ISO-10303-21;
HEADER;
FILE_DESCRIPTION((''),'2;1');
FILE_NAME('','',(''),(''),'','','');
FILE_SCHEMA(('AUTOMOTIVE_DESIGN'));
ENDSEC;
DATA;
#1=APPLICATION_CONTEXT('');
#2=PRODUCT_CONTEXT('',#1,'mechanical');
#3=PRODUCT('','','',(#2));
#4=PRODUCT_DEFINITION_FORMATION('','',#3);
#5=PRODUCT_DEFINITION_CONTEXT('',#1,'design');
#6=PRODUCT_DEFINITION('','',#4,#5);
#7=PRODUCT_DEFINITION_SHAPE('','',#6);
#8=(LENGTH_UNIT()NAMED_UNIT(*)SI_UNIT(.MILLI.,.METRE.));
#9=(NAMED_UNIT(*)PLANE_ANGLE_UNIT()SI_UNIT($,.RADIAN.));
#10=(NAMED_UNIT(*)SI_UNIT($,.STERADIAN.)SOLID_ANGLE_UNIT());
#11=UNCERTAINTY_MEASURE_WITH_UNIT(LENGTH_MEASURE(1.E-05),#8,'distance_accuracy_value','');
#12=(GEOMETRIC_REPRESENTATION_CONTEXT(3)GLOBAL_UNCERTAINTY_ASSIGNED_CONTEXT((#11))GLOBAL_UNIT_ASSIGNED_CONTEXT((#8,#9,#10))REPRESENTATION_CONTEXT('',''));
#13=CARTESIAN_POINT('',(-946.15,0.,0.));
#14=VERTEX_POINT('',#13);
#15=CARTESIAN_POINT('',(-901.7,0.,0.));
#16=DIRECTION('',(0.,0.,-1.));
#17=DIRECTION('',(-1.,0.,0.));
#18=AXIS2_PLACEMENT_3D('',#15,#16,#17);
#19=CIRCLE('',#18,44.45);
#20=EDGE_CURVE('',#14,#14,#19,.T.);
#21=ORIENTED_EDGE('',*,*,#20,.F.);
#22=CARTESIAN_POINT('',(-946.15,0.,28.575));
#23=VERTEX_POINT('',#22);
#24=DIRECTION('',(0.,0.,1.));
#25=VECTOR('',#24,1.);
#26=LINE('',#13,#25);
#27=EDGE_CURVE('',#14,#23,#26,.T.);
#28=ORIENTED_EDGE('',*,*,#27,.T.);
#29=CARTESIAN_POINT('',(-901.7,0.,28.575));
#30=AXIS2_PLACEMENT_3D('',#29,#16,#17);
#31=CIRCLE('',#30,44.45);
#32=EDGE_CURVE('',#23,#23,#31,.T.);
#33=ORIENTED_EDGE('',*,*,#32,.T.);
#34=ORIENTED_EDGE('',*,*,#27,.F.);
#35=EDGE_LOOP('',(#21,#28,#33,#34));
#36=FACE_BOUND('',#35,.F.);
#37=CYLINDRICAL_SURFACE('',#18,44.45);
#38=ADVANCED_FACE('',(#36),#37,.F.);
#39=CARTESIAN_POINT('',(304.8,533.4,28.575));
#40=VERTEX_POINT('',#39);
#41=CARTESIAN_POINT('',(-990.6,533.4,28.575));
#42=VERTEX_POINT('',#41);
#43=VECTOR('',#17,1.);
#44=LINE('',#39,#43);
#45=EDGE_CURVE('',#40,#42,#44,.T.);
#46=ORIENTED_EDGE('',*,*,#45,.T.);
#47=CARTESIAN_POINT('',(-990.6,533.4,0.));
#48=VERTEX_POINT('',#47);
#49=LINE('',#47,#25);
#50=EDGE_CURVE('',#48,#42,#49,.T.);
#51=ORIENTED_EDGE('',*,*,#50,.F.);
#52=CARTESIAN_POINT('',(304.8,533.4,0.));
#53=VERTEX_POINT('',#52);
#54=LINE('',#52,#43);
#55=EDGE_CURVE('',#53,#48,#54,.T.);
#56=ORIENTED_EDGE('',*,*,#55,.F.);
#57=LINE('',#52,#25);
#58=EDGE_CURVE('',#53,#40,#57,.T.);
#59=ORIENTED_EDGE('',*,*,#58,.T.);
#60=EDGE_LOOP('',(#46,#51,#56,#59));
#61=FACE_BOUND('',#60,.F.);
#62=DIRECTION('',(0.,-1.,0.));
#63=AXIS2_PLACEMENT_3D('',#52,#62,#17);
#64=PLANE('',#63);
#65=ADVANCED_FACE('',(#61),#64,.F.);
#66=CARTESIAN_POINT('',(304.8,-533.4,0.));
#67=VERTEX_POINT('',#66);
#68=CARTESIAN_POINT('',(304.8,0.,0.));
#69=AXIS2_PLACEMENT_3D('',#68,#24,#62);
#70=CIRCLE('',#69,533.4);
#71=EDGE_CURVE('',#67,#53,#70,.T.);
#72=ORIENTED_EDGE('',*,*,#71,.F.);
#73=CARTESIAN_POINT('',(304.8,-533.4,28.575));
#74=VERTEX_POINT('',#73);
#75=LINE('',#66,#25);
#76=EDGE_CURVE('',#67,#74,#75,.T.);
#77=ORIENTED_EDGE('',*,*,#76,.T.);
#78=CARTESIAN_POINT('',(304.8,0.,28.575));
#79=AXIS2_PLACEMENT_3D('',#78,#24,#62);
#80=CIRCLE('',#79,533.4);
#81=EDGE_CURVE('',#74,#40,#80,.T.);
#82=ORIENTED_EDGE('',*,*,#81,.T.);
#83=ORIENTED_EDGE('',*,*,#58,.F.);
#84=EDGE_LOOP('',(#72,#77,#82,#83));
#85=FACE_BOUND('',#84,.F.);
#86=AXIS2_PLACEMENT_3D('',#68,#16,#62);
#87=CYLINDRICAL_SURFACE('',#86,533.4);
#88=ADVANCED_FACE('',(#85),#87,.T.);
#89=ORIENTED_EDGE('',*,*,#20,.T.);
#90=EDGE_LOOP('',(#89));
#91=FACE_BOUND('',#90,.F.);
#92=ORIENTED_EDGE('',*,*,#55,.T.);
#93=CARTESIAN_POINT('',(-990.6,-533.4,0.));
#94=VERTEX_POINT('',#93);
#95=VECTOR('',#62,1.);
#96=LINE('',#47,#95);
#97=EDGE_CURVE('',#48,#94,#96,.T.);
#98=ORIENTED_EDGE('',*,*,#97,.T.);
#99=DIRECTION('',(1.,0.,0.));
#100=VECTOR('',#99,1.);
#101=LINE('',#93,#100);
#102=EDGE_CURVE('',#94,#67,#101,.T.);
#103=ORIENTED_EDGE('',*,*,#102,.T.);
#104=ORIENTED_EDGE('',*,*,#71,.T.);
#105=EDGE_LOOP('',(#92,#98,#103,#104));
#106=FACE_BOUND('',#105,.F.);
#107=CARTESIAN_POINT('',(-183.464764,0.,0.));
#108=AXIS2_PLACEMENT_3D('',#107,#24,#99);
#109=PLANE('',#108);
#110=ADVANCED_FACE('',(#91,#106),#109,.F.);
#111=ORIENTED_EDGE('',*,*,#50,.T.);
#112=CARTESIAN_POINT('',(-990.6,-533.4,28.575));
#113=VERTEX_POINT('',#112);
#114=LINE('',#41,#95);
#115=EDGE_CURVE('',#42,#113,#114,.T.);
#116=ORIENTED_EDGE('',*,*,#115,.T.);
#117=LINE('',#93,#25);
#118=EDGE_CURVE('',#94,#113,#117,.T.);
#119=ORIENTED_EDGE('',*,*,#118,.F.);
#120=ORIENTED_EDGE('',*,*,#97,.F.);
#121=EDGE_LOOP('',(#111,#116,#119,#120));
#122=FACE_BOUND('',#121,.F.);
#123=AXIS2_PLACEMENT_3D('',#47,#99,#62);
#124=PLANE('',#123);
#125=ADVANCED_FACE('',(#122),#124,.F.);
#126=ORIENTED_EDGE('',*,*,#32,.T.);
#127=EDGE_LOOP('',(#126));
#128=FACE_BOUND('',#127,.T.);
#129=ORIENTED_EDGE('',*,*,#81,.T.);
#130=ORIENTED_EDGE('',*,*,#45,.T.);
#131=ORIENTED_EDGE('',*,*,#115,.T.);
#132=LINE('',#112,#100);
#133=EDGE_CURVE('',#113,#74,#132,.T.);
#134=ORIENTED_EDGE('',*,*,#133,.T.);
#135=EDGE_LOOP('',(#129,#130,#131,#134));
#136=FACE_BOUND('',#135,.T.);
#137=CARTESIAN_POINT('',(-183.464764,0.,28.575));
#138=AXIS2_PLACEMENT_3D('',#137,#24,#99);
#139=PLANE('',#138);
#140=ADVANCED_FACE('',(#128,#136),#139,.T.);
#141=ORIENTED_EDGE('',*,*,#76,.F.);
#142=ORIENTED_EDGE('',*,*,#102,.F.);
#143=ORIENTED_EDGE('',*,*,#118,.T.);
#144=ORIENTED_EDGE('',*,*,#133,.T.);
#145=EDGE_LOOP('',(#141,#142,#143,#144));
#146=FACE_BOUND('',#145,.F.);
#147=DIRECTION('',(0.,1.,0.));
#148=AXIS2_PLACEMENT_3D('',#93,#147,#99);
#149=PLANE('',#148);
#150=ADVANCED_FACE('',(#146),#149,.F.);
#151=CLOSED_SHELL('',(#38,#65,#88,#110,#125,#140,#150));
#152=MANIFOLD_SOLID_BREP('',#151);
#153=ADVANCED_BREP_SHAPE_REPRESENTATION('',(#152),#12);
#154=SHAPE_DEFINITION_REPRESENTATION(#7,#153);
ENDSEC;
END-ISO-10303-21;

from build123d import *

# Parameters (mm, degrees)
F1_DEPTH = 28.575


# Not quite as in the source:
# - a feature names something its author has since deleted; it is built from what else it names


with BuildPart() as f1:
    # F0 (on Top) → F1 (new body)
    with BuildSketch(Plane.XY):
        with BuildLine():
            Line((304.8, 533.4), (-990.6, 533.4))
            Line((-990.6, 533.4), (-990.6, 0))
            Line((-990.6, 0), (-990.6, -533.4))
            Line((-990.6, -533.4), (304.8, -533.4))
            ThreePointArc((304.8, -533.4), (681.9707570849, -377.1707570849), (838.2, 0))
            ThreePointArc((838.2, 0), (681.9707570849, 377.1707570849), (304.8, 533.4))
        make_face()
        with BuildLine():
            ThreePointArc((-857.25, 0), (-901.7, -44.45), (-946.15, 0))
            ThreePointArc((-946.15, 0), (-901.7, 44.45), (-857.25, 0))
        make_face(mode=Mode.SUBTRACT)
    extrude(amount=F1_DEPTH)


solid = f1.part
